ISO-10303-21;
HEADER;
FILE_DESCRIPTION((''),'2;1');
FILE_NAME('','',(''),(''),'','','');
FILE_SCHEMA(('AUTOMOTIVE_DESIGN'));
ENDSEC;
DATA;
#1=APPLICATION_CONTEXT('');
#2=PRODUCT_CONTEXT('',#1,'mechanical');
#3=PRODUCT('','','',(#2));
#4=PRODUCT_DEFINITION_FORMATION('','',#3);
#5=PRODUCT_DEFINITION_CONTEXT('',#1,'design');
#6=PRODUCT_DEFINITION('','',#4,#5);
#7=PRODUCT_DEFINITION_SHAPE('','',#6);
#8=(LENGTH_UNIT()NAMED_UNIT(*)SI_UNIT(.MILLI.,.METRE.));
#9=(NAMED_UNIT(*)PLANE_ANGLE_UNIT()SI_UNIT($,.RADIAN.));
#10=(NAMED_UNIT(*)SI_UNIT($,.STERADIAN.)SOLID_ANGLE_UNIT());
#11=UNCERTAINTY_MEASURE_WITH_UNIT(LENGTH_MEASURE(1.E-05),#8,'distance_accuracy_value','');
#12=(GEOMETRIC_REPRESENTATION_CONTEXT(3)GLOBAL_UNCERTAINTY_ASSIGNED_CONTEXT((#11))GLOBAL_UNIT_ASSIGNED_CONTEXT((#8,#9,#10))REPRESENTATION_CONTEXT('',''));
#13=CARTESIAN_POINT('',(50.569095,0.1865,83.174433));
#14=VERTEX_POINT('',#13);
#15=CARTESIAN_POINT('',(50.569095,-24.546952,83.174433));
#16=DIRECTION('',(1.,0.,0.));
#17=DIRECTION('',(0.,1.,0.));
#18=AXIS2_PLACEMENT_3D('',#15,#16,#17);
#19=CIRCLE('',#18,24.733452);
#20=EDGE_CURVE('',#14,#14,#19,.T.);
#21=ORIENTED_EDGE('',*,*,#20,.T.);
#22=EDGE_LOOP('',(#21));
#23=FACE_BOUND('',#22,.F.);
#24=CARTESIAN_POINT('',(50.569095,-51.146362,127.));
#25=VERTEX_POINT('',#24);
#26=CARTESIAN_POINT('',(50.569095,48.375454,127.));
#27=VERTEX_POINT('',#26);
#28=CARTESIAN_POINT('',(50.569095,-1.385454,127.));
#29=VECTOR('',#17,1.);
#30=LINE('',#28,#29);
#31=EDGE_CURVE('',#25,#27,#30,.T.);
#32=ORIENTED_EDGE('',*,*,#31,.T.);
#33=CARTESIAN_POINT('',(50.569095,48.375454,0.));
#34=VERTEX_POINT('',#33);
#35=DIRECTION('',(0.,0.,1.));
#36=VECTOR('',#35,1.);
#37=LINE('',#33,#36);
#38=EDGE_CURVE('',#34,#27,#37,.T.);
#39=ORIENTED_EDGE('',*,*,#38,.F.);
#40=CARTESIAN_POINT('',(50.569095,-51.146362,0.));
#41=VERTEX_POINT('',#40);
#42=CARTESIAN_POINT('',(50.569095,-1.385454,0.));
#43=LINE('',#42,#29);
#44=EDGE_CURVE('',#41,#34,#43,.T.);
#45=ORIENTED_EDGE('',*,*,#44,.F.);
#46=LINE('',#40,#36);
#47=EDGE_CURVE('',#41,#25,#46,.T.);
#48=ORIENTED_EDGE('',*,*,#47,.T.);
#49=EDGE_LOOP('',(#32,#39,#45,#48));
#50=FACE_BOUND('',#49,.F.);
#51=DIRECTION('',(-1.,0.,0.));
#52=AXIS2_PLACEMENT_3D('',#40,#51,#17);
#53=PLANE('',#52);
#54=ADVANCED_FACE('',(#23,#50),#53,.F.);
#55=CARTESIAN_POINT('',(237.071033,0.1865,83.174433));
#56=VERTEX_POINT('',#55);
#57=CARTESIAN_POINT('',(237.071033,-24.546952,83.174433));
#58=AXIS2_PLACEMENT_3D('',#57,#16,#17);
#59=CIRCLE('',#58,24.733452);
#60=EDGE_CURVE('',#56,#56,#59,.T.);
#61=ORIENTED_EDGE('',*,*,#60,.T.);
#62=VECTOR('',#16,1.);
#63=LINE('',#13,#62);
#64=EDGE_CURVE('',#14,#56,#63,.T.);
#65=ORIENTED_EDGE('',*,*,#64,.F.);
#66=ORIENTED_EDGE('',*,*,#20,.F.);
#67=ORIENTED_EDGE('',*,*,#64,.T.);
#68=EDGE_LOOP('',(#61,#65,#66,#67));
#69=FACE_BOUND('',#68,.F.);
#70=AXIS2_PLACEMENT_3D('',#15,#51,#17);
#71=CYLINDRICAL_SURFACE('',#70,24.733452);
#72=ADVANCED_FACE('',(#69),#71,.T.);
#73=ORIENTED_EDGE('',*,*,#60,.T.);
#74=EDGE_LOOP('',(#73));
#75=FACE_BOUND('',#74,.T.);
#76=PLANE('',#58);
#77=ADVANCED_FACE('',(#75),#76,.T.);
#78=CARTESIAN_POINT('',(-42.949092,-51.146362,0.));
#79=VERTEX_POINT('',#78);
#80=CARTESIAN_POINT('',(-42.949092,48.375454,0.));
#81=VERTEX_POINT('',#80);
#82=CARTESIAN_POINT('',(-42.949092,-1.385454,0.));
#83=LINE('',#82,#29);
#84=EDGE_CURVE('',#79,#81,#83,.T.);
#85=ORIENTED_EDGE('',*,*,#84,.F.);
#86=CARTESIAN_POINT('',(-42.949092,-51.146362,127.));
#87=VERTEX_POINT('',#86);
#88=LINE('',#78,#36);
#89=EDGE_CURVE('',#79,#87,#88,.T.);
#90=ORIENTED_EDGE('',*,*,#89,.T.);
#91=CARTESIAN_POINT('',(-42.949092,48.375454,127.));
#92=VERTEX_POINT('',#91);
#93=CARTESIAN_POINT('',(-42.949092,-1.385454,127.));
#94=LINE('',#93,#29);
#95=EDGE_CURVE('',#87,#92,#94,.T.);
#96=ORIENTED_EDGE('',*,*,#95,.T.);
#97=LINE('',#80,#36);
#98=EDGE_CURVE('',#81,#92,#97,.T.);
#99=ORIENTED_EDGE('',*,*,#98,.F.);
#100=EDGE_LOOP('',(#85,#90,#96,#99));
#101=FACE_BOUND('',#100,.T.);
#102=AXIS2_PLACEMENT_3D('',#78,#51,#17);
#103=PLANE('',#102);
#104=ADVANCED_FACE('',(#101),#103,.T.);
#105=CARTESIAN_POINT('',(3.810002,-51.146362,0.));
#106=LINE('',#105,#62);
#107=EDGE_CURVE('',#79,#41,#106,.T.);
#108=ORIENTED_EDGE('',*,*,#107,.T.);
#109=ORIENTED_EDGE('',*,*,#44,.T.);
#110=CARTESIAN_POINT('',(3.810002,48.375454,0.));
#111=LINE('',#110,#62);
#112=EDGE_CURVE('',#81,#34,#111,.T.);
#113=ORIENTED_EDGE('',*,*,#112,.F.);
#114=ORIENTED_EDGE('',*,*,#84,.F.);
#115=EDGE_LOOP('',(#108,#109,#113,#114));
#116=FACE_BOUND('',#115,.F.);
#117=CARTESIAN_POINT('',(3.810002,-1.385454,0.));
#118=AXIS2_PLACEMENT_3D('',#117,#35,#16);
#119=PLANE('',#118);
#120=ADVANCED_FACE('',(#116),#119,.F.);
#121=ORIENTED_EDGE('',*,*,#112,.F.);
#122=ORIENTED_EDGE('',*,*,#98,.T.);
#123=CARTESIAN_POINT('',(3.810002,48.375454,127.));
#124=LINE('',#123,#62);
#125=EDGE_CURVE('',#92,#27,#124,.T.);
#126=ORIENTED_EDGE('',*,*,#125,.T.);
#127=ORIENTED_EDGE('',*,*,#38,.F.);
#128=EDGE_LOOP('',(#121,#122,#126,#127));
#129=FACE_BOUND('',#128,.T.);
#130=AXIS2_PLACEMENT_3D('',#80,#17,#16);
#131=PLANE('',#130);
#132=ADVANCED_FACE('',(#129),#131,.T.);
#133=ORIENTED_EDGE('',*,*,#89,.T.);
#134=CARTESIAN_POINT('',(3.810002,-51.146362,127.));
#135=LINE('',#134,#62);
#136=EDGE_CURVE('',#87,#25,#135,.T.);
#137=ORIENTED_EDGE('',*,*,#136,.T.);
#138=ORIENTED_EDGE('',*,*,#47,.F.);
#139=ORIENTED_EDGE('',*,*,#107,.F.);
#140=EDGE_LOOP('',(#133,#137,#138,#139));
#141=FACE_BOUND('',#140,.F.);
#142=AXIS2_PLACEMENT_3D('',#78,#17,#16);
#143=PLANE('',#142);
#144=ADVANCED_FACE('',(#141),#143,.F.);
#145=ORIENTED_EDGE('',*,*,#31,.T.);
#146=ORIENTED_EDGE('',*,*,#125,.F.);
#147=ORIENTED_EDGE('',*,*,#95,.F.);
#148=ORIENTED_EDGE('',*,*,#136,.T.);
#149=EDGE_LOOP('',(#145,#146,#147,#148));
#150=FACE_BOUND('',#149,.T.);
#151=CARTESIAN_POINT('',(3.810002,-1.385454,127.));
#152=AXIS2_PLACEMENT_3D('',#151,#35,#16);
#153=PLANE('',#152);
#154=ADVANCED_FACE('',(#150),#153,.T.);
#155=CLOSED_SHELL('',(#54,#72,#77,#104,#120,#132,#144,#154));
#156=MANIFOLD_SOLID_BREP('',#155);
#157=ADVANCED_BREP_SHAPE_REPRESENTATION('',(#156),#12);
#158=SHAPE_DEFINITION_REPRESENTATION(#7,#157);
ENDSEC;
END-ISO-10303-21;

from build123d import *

# Parameters (mm, degrees)
F0_W          = 93.5181863606
F0_H          = 99.5218157768
F1_DEPTH      = 127
F2_R          = 24.7334517627
F3_DEPTH      = 186.5019382
F3_DEPTH_BACK = 41.98141


# Not quite as in the source:
# - an extrude ends at something that could not be found from the text; its depth is read off the source's solid


with BuildPart() as f1:
    # F0 (on Top) → F1 (new body)
    with BuildSketch(Plane.XY):
        with Locations((3.8100015372, -1.3854540884)):
            Rectangle(F0_W, F0_H)
    extrude(amount=F1_DEPTH)

    # F2 (on face) → F3 (join, two sides)
    with BuildSketch(Plane.YZ.offset(50.5690947175)) as f3_sk:
        with Locations((-24.546951997, 83.1744330844)):
            Circle(F2_R)
    extrude(amount=F3_DEPTH)
    extrude(f3_sk.sketch, amount=-F3_DEPTH_BACK)


solid = f1.part
